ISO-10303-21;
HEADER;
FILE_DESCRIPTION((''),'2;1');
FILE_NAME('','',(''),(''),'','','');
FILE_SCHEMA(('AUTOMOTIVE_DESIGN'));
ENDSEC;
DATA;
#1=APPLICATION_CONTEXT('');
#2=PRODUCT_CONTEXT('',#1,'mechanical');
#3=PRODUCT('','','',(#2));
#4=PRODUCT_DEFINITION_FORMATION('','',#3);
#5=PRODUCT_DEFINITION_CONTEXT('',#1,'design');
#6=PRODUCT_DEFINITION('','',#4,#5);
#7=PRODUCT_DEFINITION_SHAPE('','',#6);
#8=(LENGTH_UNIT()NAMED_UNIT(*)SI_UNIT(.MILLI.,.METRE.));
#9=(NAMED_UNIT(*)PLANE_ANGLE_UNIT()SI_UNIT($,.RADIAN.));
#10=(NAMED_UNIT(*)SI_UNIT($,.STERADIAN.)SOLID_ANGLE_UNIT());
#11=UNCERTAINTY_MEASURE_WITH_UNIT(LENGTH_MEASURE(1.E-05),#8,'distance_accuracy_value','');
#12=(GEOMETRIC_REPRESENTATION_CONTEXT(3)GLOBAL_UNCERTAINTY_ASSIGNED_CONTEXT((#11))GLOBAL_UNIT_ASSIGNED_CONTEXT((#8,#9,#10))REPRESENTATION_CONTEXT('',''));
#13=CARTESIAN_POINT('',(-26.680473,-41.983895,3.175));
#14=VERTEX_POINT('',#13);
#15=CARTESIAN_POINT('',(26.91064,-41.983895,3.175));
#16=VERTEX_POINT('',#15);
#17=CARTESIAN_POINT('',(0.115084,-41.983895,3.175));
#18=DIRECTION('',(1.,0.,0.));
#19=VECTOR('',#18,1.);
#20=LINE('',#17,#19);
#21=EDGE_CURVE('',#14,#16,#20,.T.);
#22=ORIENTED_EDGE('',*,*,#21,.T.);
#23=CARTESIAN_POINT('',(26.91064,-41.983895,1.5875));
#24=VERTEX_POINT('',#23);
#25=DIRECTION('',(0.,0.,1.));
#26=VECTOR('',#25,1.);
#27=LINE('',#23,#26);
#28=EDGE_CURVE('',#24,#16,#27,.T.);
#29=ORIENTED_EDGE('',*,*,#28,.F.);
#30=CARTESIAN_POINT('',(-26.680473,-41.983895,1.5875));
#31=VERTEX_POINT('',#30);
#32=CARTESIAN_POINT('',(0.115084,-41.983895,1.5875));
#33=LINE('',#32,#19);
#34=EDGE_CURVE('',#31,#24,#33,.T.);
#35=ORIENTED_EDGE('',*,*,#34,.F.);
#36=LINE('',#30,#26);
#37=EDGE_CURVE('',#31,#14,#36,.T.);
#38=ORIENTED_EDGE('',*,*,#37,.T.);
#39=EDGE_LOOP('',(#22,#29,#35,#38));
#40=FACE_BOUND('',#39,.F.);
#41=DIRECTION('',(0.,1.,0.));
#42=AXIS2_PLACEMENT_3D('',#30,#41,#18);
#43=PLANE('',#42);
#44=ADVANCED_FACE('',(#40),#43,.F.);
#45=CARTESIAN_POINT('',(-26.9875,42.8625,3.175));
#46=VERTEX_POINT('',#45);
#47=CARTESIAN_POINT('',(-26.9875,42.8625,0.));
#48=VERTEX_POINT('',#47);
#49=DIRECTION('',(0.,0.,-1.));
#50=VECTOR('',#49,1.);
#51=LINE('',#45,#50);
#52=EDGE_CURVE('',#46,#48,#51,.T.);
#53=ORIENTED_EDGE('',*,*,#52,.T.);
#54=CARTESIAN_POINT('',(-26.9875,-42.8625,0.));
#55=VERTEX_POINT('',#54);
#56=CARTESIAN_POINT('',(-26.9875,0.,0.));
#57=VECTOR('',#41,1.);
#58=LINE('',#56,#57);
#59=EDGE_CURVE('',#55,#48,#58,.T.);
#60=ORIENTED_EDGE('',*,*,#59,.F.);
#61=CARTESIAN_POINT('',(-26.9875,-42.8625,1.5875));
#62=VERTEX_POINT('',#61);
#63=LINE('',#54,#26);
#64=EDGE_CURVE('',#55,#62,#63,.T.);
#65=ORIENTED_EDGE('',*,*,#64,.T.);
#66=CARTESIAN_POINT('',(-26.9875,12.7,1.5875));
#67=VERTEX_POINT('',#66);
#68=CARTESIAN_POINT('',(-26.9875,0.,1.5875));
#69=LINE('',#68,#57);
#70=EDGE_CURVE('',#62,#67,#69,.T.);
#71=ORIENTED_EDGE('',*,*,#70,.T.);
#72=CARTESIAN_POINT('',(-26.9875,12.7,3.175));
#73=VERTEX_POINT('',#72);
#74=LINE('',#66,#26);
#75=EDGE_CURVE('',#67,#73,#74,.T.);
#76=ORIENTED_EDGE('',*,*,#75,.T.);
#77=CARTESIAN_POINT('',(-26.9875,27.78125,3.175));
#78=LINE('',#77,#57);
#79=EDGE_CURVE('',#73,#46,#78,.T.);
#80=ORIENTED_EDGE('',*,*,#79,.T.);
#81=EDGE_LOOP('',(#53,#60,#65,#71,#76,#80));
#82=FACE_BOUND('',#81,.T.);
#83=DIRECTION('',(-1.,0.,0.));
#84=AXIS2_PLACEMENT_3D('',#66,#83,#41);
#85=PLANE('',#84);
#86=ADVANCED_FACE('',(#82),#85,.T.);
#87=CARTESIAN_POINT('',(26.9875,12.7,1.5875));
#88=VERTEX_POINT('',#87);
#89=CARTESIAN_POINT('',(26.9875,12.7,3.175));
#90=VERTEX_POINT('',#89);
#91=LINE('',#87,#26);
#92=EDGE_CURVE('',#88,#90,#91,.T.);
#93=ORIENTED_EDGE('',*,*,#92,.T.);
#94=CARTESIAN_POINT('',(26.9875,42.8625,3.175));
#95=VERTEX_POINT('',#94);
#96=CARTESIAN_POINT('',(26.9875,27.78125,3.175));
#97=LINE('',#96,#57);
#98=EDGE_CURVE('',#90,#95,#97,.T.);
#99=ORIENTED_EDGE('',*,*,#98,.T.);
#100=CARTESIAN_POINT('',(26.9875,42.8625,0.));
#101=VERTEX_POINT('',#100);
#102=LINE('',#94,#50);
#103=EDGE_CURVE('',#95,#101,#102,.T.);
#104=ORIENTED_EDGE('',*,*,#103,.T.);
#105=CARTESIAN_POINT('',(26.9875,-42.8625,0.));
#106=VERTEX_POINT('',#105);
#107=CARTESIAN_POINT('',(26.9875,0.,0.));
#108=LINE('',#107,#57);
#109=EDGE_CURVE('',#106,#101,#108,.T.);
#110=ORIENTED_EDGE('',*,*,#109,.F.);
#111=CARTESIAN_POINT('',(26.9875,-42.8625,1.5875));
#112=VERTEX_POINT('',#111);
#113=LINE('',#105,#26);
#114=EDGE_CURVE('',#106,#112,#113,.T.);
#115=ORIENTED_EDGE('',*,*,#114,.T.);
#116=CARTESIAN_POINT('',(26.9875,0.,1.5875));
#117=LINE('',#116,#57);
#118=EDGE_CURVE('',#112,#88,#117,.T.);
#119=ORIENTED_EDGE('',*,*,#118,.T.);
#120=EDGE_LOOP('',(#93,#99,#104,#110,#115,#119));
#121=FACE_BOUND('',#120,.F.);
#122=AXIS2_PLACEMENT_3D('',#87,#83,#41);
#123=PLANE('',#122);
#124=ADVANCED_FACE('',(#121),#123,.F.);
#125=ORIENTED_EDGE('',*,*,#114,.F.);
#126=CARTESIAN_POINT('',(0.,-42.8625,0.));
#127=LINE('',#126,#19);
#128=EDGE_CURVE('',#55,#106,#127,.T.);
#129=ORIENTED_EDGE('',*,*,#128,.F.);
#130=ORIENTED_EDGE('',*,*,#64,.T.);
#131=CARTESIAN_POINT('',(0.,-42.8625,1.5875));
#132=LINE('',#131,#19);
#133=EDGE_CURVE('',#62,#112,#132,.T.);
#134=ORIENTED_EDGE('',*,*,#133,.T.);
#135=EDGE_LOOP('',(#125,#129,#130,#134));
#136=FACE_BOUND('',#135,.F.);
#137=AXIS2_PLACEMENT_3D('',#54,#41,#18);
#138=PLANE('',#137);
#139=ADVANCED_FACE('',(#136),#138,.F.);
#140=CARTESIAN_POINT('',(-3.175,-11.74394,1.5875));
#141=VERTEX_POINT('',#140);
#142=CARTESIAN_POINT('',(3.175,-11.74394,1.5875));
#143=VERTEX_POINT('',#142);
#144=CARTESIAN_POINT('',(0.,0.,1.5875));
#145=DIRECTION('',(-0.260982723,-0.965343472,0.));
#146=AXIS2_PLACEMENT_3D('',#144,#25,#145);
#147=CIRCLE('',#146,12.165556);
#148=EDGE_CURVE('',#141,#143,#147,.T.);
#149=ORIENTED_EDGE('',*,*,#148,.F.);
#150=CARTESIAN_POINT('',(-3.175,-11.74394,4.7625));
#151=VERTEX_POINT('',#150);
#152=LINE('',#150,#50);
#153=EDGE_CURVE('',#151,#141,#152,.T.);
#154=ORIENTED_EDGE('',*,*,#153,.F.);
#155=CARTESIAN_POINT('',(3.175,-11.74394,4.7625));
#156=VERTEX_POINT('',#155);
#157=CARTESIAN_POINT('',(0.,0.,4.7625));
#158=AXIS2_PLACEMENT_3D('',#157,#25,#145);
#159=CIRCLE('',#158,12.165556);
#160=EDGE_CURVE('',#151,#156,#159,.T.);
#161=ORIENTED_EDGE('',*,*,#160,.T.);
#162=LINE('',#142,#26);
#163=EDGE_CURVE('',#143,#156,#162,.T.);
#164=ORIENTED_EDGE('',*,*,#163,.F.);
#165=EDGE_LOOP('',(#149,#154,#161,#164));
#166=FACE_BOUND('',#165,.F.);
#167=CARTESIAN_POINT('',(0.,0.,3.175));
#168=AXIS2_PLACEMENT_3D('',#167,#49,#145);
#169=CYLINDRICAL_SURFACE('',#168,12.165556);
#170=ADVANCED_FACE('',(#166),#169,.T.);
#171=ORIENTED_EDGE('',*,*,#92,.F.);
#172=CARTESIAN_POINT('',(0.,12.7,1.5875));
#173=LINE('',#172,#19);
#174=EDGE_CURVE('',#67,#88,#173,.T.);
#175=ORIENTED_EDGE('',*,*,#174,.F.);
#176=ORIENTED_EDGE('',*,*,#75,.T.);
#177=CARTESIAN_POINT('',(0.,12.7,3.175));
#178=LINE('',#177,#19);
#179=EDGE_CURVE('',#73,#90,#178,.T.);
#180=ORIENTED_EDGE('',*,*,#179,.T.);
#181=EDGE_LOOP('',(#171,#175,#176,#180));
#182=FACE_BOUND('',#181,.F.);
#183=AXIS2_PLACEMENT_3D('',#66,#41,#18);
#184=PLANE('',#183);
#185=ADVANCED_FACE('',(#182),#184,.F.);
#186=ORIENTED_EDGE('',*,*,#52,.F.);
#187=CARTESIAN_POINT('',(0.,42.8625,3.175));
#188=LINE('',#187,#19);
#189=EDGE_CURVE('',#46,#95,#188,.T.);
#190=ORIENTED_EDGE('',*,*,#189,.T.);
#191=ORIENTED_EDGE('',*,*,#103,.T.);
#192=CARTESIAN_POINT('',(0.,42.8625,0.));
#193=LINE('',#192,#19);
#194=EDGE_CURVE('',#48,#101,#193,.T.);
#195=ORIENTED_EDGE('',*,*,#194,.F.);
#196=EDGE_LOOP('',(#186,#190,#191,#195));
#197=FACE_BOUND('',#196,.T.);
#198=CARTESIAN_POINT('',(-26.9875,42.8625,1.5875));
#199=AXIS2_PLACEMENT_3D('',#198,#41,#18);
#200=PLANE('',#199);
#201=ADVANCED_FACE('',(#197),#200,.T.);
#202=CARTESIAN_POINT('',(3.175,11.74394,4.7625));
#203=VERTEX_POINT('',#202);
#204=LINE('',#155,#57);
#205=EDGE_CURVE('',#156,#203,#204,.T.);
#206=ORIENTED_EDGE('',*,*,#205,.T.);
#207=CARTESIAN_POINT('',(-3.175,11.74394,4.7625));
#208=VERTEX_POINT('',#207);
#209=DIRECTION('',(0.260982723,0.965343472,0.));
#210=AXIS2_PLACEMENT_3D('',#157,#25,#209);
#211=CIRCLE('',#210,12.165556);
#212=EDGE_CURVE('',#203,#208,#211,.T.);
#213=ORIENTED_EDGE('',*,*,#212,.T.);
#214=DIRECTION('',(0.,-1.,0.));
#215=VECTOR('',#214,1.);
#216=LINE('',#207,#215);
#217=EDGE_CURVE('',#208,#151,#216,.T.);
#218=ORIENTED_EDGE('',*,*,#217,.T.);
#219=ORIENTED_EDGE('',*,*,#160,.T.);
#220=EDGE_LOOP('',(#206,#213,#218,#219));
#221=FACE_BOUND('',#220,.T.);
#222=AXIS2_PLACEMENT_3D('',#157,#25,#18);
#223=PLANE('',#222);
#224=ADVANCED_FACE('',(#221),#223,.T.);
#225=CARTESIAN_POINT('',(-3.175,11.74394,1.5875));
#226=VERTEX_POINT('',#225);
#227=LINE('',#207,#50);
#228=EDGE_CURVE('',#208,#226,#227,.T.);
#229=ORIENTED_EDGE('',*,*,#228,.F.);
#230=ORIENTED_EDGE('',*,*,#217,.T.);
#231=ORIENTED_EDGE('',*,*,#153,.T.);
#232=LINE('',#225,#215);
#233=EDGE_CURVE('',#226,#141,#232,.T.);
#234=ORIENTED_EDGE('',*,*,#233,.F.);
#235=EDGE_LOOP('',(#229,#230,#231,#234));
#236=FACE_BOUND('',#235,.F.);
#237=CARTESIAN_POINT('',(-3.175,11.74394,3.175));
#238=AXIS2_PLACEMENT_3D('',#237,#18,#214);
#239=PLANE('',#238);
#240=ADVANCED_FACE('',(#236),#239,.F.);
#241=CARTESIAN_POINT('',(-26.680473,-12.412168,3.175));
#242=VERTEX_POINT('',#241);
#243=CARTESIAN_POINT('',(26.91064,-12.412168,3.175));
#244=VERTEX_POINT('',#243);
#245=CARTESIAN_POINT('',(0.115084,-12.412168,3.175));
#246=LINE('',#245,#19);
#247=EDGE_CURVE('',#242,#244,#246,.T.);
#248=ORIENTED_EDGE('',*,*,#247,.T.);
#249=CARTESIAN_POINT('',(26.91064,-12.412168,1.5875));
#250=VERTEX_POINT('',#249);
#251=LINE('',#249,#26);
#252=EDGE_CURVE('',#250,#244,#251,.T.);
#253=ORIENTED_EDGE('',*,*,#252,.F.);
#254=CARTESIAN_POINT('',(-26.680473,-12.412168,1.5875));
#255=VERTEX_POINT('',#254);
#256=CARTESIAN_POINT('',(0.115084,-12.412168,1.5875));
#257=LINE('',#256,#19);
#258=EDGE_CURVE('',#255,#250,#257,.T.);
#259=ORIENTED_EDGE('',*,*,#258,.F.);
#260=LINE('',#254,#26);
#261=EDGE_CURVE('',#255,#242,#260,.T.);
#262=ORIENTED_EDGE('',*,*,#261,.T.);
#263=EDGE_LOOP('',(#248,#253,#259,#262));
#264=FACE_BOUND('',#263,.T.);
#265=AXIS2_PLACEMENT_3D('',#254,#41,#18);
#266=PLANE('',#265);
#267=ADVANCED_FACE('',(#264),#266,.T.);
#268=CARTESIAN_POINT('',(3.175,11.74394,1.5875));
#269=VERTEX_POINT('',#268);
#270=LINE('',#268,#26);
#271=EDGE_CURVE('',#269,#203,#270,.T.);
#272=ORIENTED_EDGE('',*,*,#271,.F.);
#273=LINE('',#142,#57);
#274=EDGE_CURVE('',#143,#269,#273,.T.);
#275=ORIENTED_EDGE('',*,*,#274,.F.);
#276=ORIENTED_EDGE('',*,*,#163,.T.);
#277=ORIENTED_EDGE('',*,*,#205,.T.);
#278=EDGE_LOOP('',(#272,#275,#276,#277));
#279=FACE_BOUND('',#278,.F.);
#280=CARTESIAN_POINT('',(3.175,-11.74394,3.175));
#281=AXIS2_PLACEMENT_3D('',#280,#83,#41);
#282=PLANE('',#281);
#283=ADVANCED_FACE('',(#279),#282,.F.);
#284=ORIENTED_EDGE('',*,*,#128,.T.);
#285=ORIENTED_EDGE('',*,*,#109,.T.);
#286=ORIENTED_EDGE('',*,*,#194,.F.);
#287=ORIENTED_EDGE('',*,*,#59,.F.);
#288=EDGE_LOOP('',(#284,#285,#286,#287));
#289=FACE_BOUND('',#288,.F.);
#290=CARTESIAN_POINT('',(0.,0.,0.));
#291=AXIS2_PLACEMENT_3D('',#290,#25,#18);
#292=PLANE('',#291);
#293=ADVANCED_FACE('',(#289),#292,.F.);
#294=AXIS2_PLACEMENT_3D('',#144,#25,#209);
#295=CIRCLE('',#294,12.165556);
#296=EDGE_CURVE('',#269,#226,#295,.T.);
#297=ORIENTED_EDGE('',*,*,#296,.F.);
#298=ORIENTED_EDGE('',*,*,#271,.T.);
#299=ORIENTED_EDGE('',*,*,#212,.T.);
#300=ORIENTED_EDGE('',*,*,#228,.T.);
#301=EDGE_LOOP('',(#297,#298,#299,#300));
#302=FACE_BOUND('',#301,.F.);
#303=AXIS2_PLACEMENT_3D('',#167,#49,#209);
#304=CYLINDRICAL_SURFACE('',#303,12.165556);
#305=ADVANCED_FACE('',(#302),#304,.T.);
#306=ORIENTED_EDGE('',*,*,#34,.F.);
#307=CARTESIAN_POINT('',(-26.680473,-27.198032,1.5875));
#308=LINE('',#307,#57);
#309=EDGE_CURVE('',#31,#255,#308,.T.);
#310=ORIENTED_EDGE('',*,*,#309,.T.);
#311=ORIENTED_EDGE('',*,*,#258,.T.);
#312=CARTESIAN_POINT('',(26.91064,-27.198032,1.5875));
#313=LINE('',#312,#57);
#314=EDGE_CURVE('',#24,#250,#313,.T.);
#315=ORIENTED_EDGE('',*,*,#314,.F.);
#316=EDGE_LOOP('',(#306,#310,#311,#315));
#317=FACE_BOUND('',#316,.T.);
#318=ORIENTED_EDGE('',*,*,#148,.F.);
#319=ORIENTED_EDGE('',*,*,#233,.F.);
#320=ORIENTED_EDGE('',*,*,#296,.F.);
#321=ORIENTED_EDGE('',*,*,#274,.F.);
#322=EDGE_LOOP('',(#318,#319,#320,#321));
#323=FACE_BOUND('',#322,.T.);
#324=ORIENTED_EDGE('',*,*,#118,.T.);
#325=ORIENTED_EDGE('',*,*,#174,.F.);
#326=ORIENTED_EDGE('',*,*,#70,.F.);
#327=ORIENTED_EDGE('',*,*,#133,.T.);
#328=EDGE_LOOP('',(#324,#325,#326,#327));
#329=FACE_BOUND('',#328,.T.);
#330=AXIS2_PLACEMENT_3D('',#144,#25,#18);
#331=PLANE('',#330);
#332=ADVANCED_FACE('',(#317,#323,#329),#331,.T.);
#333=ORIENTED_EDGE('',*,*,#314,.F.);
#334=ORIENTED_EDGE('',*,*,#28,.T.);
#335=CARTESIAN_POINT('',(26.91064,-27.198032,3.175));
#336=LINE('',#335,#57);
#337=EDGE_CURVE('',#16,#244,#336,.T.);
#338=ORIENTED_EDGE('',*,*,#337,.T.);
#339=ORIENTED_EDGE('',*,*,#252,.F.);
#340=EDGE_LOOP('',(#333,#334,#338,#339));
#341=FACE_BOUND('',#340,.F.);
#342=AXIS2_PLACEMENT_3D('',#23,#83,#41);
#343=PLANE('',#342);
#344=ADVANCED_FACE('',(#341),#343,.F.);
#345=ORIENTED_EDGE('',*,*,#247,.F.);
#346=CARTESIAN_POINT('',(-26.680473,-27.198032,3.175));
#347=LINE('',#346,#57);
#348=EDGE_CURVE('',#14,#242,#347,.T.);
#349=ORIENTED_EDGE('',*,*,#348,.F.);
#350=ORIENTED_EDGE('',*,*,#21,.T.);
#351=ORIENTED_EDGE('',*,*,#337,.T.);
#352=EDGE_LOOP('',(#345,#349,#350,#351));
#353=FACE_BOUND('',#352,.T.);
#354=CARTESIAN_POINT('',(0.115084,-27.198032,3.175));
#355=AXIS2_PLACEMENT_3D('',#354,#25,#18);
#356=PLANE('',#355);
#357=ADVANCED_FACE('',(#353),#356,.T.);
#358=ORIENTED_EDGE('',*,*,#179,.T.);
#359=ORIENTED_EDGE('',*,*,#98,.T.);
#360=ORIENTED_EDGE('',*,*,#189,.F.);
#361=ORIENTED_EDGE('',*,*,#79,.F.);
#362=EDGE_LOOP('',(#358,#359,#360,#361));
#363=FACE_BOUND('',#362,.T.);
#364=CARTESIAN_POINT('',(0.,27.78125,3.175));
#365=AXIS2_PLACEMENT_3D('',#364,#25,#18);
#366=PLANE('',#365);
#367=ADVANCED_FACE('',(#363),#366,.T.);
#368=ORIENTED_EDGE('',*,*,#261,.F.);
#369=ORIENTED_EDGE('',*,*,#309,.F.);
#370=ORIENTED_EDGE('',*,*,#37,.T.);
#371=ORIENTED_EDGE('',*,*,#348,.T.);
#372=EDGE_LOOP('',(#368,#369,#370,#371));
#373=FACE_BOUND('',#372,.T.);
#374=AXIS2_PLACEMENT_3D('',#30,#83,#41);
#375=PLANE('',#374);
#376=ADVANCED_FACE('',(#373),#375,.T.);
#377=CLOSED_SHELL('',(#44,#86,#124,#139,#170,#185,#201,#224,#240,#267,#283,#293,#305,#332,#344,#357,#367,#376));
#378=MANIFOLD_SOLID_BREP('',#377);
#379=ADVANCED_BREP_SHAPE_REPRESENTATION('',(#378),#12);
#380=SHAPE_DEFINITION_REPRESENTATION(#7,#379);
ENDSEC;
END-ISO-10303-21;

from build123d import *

# Parameters (mm, degrees)
F0_W      = 53.975
F0_H      = 85.725
F1_DEPTH  = 1.5875
F3_W      = 53.5911135375
F3_H      = 29.5717269182
F4_DEPTH  = 1.5875
F2_W      = 53.975
F2_H      = 30.1625
F5_DEPTH  = 1.5875
F9_DEPTH  = 1.5875
F10_DEPTH = 1.5875


# Not quite as in the source:
# - the program builds the solid bodies; features that only make, move or delete a surface that nothing else refers to are left out


with BuildPart() as f1:
    # F0 (on Top) → F1 (new body)
    with BuildSketch(Plane.XY):
        Rectangle(F0_W, F0_H)
    extrude(amount=F1_DEPTH)

    # F3 (on face) → F4 (join)
    with BuildSketch(Plane.XY.offset(1.5875)):
        with Locations((0.1150835305, -27.1980315447)):
            Rectangle(F3_W, F3_H)
    extrude(amount=F4_DEPTH)

    # F2 (on face) → F5 (join)
    with BuildSketch(Plane.XY.offset(1.5875)):
        with Locations((0, 27.78125)):
            Rectangle(F2_W, F2_H)
    extrude(amount=F5_DEPTH)

    # F8 (on face) → F9 (join)
    with BuildSketch(Plane.XY.offset(1.5875)):
        with BuildLine():
            ThreePointArc((-3.175, -11.7439402944), (0, -12.1655562404), (3.175, -11.7439402944))
            Line((3.175, -11.7439402944), (3.175, 11.7439402944))
            ThreePointArc((3.175, 11.7439402944), (0, 12.1655562404), (-3.175, 11.7439402944))
            Line((-3.175, 11.7439402944), (-3.175, -11.7439402944))
        make_face()
    extrude(amount=F9_DEPTH)

    # F10 (add): a face of the model
    f10_faces = [f1.faces().sort_by_distance(p)[0] for p in [
        (0, 0, 3.175),
    ]]
    extrude(f10_faces, amount=F10_DEPTH)


solid = f1.part
